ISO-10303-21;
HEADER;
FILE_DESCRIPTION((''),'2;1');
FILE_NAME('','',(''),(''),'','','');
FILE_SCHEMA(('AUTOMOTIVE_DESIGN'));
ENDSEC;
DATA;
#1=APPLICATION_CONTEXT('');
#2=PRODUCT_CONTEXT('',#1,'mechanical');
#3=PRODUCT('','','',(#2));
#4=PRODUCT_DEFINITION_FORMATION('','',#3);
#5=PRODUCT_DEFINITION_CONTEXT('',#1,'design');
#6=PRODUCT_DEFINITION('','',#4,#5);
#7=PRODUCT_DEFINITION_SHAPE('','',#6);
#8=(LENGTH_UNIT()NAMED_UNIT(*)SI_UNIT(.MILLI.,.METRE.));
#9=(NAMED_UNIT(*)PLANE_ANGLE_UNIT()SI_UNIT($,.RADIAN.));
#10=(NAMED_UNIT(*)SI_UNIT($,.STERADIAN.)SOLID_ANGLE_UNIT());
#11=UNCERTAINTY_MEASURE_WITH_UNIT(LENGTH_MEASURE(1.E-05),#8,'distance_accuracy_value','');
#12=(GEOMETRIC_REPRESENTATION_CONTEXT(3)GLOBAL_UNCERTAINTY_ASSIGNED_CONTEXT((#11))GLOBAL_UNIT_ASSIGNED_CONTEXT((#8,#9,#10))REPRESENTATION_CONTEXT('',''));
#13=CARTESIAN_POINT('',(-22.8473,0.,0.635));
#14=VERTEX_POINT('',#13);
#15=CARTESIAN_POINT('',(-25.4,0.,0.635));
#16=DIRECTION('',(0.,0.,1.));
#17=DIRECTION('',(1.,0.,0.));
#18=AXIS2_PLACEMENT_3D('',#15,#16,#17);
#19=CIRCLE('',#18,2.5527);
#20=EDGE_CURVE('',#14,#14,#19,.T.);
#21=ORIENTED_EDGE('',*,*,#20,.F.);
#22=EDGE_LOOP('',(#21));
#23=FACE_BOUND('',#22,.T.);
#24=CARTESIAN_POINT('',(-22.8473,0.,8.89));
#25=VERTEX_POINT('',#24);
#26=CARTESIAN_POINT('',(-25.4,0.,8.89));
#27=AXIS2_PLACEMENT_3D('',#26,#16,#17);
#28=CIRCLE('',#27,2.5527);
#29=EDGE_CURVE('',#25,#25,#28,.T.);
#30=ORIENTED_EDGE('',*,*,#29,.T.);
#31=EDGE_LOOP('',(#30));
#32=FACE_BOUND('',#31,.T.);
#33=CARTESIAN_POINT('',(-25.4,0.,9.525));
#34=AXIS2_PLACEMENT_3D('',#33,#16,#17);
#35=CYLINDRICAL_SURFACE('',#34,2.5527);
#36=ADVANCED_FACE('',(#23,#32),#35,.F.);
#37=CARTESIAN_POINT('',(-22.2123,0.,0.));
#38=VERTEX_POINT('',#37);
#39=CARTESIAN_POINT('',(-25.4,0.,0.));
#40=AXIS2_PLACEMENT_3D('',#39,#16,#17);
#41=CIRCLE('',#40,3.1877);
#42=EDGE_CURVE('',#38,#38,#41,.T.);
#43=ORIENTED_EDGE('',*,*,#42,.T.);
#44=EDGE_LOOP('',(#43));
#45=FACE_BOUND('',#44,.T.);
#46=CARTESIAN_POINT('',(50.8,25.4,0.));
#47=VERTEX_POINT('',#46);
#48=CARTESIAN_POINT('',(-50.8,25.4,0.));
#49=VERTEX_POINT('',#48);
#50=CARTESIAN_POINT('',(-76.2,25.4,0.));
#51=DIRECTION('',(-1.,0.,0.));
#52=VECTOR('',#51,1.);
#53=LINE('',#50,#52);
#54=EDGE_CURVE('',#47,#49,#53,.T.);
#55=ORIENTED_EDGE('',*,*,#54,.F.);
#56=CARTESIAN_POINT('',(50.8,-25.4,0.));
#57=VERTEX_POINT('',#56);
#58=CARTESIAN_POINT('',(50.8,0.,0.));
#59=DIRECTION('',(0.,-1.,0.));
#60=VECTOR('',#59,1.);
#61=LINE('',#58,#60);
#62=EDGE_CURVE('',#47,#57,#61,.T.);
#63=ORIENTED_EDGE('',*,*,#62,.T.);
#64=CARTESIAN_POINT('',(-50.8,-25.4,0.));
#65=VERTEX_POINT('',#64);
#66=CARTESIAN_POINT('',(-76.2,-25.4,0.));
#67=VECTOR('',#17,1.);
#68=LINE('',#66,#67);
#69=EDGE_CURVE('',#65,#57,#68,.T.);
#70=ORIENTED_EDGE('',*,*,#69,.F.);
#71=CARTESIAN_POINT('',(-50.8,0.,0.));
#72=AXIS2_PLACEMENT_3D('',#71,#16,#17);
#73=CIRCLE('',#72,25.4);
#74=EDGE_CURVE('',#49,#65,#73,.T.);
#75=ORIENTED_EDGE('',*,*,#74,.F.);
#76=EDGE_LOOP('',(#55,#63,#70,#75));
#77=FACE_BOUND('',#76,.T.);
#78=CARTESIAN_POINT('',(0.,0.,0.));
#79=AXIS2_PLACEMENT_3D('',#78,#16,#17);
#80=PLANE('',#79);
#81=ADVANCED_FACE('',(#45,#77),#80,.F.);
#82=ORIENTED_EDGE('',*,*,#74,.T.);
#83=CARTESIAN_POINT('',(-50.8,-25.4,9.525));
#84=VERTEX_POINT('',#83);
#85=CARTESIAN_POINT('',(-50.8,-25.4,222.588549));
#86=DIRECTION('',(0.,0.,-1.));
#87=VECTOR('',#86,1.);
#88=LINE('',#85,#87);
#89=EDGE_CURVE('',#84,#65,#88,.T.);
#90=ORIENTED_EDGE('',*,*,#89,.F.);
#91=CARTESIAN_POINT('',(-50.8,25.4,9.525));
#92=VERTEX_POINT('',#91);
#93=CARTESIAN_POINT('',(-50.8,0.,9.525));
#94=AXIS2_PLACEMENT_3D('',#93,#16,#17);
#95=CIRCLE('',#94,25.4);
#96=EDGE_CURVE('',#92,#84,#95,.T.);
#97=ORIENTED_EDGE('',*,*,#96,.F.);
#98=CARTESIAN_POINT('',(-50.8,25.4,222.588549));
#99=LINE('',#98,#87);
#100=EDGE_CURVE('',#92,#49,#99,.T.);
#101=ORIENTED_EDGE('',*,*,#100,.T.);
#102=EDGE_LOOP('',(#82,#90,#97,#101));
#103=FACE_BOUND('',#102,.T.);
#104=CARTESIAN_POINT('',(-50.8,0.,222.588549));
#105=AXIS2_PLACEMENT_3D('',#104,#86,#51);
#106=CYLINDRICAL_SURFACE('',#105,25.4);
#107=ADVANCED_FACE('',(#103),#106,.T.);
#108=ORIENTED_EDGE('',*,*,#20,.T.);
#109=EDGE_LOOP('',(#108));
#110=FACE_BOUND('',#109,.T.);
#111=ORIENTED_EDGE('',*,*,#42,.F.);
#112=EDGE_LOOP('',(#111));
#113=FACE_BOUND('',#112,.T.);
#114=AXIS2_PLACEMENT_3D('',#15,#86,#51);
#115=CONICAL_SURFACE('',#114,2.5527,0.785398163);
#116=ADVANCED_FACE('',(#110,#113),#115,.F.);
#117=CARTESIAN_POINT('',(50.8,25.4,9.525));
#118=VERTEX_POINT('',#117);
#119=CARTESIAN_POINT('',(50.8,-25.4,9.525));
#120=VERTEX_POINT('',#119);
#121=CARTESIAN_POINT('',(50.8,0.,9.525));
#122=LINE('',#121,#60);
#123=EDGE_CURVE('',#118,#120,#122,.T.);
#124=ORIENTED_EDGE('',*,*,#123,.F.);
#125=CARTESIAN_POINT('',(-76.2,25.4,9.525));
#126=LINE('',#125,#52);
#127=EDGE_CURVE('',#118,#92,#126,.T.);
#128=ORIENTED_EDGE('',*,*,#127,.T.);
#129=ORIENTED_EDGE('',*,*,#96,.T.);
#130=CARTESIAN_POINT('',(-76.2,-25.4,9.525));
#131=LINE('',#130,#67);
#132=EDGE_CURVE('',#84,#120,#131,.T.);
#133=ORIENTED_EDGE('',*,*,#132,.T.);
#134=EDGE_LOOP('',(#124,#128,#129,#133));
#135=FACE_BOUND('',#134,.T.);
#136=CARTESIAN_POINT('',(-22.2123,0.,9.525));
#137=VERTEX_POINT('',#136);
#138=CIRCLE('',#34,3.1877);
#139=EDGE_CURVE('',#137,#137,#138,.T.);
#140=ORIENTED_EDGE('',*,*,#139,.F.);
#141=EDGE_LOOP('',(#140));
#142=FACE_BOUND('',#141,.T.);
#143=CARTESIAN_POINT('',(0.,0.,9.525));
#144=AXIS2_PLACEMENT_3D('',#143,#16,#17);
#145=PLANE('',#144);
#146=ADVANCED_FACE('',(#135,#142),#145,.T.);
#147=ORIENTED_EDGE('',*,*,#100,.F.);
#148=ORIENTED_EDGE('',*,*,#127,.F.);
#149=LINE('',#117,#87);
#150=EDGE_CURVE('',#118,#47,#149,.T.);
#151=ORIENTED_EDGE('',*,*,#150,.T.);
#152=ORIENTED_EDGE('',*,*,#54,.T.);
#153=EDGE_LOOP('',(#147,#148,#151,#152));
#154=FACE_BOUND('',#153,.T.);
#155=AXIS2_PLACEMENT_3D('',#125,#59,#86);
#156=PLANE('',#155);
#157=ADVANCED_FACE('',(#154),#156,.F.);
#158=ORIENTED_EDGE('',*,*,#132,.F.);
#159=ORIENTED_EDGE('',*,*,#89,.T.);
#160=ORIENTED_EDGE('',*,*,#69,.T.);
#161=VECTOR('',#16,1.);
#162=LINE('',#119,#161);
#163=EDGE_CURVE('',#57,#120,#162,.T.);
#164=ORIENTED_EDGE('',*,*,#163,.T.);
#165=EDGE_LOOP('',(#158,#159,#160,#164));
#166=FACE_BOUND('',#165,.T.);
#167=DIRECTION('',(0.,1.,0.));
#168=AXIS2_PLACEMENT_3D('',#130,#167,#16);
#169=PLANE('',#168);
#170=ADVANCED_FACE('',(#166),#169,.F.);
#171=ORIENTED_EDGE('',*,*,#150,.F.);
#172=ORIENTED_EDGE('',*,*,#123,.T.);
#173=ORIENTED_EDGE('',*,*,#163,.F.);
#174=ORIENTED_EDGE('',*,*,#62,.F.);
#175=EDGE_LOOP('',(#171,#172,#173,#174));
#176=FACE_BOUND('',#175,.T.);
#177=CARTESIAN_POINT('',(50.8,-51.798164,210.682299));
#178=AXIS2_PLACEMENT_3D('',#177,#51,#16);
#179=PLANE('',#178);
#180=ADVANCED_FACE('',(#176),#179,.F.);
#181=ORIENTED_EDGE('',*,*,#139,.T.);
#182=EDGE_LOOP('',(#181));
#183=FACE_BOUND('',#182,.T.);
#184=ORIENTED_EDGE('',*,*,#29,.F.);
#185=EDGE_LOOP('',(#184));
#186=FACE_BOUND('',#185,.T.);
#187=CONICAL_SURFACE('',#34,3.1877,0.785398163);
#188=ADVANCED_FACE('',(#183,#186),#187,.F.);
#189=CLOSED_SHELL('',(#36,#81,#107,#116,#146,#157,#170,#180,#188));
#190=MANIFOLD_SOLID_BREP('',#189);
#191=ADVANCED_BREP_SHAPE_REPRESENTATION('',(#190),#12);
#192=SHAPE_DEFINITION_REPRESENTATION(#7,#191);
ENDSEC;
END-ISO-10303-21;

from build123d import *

# Parameters (mm, degrees)
SKETCH1_W               = 152.4
SKETCH1_H               = 50.8
BOSS_EXTRUDE2_DEPTH     = 9.525
CUT_EXTRUDE1_START      = -9.525
CUT_EXTRUDE1_DEPTH      = 9.525
CUT_EXTRUDE2_DEPTH      = 81.884643938
CUT_EXTRUDE2_DEPTH_BACK = 81.884643938


# Read off the part's stored shape, not the designer's step: Cut-Extrude1
with BuildPart() as part:
    # Sketch1 → Boss-Extrude2 (new body)
    with BuildSketch(Plane.XY):
        Rectangle(SKETCH1_W, SKETCH1_H)
    extrude(amount=BOSS_EXTRUDE2_DEPTH)

    # Sketch2 → 1/4-20 Tapped Hole1 (revolve, cut)
    with BuildSketch(Plane(origin=(-25.4, 0, 9.525), x_dir=(0, -1, 0), z_dir=(1, 0, 0))):
        Polygon((0, 0), (0, 9.525), (3.1877, 9.525), (2.5527, 8.89), (2.5527, 0.635), (3.1877, 0), align=None)
    revolve(axis=Axis((-25.4, 0, 15.875), (0, 0, -1)), mode=Mode.SUBTRACT)

    # Cut-Extrude1 outline → Cut-Extrude1 (cut)
    with BuildSketch(Plane.XY.offset(9.525).offset(CUT_EXTRUDE1_START)):
        with BuildLine():
            Line((-76.2, -25.4), (-50.8, -25.4))
            ThreePointArc((-50.8, -25.4), (-68.760512242, -17.960512242), (-76.2, 0))
            Line((-76.2, 0), (-76.2, -25.4))
        make_face()
        with BuildLine():
            Line((-76.2, 25.4), (-76.2, 0))
            ThreePointArc((-76.2, 0), (-68.760512242, 17.960512242), (-50.8, 25.4))
            Line((-50.8, 25.4), (-76.2, 25.4))
        make_face()
    extrude(amount=CUT_EXTRUDE1_DEPTH, mode=Mode.SUBTRACT)

    # Sketch5 → Cut-Extrude2 (cut, two sides: drawn at the far end of the back side and taken through both)
    with BuildSketch(Plane.XY.offset(9.525).offset(-CUT_EXTRUDE2_DEPTH_BACK)):
        Polygon((50.8, -359.042550973), (50.8, -51.798163577), (50.8, 47.427693525), (50.8, 354.672080921), (665.288774792, 354.672080921), (665.288774792, -359.042550973), align=None)
    extrude(amount=CUT_EXTRUDE2_DEPTH + CUT_EXTRUDE2_DEPTH_BACK, mode=Mode.SUBTRACT)


solid = part.part
